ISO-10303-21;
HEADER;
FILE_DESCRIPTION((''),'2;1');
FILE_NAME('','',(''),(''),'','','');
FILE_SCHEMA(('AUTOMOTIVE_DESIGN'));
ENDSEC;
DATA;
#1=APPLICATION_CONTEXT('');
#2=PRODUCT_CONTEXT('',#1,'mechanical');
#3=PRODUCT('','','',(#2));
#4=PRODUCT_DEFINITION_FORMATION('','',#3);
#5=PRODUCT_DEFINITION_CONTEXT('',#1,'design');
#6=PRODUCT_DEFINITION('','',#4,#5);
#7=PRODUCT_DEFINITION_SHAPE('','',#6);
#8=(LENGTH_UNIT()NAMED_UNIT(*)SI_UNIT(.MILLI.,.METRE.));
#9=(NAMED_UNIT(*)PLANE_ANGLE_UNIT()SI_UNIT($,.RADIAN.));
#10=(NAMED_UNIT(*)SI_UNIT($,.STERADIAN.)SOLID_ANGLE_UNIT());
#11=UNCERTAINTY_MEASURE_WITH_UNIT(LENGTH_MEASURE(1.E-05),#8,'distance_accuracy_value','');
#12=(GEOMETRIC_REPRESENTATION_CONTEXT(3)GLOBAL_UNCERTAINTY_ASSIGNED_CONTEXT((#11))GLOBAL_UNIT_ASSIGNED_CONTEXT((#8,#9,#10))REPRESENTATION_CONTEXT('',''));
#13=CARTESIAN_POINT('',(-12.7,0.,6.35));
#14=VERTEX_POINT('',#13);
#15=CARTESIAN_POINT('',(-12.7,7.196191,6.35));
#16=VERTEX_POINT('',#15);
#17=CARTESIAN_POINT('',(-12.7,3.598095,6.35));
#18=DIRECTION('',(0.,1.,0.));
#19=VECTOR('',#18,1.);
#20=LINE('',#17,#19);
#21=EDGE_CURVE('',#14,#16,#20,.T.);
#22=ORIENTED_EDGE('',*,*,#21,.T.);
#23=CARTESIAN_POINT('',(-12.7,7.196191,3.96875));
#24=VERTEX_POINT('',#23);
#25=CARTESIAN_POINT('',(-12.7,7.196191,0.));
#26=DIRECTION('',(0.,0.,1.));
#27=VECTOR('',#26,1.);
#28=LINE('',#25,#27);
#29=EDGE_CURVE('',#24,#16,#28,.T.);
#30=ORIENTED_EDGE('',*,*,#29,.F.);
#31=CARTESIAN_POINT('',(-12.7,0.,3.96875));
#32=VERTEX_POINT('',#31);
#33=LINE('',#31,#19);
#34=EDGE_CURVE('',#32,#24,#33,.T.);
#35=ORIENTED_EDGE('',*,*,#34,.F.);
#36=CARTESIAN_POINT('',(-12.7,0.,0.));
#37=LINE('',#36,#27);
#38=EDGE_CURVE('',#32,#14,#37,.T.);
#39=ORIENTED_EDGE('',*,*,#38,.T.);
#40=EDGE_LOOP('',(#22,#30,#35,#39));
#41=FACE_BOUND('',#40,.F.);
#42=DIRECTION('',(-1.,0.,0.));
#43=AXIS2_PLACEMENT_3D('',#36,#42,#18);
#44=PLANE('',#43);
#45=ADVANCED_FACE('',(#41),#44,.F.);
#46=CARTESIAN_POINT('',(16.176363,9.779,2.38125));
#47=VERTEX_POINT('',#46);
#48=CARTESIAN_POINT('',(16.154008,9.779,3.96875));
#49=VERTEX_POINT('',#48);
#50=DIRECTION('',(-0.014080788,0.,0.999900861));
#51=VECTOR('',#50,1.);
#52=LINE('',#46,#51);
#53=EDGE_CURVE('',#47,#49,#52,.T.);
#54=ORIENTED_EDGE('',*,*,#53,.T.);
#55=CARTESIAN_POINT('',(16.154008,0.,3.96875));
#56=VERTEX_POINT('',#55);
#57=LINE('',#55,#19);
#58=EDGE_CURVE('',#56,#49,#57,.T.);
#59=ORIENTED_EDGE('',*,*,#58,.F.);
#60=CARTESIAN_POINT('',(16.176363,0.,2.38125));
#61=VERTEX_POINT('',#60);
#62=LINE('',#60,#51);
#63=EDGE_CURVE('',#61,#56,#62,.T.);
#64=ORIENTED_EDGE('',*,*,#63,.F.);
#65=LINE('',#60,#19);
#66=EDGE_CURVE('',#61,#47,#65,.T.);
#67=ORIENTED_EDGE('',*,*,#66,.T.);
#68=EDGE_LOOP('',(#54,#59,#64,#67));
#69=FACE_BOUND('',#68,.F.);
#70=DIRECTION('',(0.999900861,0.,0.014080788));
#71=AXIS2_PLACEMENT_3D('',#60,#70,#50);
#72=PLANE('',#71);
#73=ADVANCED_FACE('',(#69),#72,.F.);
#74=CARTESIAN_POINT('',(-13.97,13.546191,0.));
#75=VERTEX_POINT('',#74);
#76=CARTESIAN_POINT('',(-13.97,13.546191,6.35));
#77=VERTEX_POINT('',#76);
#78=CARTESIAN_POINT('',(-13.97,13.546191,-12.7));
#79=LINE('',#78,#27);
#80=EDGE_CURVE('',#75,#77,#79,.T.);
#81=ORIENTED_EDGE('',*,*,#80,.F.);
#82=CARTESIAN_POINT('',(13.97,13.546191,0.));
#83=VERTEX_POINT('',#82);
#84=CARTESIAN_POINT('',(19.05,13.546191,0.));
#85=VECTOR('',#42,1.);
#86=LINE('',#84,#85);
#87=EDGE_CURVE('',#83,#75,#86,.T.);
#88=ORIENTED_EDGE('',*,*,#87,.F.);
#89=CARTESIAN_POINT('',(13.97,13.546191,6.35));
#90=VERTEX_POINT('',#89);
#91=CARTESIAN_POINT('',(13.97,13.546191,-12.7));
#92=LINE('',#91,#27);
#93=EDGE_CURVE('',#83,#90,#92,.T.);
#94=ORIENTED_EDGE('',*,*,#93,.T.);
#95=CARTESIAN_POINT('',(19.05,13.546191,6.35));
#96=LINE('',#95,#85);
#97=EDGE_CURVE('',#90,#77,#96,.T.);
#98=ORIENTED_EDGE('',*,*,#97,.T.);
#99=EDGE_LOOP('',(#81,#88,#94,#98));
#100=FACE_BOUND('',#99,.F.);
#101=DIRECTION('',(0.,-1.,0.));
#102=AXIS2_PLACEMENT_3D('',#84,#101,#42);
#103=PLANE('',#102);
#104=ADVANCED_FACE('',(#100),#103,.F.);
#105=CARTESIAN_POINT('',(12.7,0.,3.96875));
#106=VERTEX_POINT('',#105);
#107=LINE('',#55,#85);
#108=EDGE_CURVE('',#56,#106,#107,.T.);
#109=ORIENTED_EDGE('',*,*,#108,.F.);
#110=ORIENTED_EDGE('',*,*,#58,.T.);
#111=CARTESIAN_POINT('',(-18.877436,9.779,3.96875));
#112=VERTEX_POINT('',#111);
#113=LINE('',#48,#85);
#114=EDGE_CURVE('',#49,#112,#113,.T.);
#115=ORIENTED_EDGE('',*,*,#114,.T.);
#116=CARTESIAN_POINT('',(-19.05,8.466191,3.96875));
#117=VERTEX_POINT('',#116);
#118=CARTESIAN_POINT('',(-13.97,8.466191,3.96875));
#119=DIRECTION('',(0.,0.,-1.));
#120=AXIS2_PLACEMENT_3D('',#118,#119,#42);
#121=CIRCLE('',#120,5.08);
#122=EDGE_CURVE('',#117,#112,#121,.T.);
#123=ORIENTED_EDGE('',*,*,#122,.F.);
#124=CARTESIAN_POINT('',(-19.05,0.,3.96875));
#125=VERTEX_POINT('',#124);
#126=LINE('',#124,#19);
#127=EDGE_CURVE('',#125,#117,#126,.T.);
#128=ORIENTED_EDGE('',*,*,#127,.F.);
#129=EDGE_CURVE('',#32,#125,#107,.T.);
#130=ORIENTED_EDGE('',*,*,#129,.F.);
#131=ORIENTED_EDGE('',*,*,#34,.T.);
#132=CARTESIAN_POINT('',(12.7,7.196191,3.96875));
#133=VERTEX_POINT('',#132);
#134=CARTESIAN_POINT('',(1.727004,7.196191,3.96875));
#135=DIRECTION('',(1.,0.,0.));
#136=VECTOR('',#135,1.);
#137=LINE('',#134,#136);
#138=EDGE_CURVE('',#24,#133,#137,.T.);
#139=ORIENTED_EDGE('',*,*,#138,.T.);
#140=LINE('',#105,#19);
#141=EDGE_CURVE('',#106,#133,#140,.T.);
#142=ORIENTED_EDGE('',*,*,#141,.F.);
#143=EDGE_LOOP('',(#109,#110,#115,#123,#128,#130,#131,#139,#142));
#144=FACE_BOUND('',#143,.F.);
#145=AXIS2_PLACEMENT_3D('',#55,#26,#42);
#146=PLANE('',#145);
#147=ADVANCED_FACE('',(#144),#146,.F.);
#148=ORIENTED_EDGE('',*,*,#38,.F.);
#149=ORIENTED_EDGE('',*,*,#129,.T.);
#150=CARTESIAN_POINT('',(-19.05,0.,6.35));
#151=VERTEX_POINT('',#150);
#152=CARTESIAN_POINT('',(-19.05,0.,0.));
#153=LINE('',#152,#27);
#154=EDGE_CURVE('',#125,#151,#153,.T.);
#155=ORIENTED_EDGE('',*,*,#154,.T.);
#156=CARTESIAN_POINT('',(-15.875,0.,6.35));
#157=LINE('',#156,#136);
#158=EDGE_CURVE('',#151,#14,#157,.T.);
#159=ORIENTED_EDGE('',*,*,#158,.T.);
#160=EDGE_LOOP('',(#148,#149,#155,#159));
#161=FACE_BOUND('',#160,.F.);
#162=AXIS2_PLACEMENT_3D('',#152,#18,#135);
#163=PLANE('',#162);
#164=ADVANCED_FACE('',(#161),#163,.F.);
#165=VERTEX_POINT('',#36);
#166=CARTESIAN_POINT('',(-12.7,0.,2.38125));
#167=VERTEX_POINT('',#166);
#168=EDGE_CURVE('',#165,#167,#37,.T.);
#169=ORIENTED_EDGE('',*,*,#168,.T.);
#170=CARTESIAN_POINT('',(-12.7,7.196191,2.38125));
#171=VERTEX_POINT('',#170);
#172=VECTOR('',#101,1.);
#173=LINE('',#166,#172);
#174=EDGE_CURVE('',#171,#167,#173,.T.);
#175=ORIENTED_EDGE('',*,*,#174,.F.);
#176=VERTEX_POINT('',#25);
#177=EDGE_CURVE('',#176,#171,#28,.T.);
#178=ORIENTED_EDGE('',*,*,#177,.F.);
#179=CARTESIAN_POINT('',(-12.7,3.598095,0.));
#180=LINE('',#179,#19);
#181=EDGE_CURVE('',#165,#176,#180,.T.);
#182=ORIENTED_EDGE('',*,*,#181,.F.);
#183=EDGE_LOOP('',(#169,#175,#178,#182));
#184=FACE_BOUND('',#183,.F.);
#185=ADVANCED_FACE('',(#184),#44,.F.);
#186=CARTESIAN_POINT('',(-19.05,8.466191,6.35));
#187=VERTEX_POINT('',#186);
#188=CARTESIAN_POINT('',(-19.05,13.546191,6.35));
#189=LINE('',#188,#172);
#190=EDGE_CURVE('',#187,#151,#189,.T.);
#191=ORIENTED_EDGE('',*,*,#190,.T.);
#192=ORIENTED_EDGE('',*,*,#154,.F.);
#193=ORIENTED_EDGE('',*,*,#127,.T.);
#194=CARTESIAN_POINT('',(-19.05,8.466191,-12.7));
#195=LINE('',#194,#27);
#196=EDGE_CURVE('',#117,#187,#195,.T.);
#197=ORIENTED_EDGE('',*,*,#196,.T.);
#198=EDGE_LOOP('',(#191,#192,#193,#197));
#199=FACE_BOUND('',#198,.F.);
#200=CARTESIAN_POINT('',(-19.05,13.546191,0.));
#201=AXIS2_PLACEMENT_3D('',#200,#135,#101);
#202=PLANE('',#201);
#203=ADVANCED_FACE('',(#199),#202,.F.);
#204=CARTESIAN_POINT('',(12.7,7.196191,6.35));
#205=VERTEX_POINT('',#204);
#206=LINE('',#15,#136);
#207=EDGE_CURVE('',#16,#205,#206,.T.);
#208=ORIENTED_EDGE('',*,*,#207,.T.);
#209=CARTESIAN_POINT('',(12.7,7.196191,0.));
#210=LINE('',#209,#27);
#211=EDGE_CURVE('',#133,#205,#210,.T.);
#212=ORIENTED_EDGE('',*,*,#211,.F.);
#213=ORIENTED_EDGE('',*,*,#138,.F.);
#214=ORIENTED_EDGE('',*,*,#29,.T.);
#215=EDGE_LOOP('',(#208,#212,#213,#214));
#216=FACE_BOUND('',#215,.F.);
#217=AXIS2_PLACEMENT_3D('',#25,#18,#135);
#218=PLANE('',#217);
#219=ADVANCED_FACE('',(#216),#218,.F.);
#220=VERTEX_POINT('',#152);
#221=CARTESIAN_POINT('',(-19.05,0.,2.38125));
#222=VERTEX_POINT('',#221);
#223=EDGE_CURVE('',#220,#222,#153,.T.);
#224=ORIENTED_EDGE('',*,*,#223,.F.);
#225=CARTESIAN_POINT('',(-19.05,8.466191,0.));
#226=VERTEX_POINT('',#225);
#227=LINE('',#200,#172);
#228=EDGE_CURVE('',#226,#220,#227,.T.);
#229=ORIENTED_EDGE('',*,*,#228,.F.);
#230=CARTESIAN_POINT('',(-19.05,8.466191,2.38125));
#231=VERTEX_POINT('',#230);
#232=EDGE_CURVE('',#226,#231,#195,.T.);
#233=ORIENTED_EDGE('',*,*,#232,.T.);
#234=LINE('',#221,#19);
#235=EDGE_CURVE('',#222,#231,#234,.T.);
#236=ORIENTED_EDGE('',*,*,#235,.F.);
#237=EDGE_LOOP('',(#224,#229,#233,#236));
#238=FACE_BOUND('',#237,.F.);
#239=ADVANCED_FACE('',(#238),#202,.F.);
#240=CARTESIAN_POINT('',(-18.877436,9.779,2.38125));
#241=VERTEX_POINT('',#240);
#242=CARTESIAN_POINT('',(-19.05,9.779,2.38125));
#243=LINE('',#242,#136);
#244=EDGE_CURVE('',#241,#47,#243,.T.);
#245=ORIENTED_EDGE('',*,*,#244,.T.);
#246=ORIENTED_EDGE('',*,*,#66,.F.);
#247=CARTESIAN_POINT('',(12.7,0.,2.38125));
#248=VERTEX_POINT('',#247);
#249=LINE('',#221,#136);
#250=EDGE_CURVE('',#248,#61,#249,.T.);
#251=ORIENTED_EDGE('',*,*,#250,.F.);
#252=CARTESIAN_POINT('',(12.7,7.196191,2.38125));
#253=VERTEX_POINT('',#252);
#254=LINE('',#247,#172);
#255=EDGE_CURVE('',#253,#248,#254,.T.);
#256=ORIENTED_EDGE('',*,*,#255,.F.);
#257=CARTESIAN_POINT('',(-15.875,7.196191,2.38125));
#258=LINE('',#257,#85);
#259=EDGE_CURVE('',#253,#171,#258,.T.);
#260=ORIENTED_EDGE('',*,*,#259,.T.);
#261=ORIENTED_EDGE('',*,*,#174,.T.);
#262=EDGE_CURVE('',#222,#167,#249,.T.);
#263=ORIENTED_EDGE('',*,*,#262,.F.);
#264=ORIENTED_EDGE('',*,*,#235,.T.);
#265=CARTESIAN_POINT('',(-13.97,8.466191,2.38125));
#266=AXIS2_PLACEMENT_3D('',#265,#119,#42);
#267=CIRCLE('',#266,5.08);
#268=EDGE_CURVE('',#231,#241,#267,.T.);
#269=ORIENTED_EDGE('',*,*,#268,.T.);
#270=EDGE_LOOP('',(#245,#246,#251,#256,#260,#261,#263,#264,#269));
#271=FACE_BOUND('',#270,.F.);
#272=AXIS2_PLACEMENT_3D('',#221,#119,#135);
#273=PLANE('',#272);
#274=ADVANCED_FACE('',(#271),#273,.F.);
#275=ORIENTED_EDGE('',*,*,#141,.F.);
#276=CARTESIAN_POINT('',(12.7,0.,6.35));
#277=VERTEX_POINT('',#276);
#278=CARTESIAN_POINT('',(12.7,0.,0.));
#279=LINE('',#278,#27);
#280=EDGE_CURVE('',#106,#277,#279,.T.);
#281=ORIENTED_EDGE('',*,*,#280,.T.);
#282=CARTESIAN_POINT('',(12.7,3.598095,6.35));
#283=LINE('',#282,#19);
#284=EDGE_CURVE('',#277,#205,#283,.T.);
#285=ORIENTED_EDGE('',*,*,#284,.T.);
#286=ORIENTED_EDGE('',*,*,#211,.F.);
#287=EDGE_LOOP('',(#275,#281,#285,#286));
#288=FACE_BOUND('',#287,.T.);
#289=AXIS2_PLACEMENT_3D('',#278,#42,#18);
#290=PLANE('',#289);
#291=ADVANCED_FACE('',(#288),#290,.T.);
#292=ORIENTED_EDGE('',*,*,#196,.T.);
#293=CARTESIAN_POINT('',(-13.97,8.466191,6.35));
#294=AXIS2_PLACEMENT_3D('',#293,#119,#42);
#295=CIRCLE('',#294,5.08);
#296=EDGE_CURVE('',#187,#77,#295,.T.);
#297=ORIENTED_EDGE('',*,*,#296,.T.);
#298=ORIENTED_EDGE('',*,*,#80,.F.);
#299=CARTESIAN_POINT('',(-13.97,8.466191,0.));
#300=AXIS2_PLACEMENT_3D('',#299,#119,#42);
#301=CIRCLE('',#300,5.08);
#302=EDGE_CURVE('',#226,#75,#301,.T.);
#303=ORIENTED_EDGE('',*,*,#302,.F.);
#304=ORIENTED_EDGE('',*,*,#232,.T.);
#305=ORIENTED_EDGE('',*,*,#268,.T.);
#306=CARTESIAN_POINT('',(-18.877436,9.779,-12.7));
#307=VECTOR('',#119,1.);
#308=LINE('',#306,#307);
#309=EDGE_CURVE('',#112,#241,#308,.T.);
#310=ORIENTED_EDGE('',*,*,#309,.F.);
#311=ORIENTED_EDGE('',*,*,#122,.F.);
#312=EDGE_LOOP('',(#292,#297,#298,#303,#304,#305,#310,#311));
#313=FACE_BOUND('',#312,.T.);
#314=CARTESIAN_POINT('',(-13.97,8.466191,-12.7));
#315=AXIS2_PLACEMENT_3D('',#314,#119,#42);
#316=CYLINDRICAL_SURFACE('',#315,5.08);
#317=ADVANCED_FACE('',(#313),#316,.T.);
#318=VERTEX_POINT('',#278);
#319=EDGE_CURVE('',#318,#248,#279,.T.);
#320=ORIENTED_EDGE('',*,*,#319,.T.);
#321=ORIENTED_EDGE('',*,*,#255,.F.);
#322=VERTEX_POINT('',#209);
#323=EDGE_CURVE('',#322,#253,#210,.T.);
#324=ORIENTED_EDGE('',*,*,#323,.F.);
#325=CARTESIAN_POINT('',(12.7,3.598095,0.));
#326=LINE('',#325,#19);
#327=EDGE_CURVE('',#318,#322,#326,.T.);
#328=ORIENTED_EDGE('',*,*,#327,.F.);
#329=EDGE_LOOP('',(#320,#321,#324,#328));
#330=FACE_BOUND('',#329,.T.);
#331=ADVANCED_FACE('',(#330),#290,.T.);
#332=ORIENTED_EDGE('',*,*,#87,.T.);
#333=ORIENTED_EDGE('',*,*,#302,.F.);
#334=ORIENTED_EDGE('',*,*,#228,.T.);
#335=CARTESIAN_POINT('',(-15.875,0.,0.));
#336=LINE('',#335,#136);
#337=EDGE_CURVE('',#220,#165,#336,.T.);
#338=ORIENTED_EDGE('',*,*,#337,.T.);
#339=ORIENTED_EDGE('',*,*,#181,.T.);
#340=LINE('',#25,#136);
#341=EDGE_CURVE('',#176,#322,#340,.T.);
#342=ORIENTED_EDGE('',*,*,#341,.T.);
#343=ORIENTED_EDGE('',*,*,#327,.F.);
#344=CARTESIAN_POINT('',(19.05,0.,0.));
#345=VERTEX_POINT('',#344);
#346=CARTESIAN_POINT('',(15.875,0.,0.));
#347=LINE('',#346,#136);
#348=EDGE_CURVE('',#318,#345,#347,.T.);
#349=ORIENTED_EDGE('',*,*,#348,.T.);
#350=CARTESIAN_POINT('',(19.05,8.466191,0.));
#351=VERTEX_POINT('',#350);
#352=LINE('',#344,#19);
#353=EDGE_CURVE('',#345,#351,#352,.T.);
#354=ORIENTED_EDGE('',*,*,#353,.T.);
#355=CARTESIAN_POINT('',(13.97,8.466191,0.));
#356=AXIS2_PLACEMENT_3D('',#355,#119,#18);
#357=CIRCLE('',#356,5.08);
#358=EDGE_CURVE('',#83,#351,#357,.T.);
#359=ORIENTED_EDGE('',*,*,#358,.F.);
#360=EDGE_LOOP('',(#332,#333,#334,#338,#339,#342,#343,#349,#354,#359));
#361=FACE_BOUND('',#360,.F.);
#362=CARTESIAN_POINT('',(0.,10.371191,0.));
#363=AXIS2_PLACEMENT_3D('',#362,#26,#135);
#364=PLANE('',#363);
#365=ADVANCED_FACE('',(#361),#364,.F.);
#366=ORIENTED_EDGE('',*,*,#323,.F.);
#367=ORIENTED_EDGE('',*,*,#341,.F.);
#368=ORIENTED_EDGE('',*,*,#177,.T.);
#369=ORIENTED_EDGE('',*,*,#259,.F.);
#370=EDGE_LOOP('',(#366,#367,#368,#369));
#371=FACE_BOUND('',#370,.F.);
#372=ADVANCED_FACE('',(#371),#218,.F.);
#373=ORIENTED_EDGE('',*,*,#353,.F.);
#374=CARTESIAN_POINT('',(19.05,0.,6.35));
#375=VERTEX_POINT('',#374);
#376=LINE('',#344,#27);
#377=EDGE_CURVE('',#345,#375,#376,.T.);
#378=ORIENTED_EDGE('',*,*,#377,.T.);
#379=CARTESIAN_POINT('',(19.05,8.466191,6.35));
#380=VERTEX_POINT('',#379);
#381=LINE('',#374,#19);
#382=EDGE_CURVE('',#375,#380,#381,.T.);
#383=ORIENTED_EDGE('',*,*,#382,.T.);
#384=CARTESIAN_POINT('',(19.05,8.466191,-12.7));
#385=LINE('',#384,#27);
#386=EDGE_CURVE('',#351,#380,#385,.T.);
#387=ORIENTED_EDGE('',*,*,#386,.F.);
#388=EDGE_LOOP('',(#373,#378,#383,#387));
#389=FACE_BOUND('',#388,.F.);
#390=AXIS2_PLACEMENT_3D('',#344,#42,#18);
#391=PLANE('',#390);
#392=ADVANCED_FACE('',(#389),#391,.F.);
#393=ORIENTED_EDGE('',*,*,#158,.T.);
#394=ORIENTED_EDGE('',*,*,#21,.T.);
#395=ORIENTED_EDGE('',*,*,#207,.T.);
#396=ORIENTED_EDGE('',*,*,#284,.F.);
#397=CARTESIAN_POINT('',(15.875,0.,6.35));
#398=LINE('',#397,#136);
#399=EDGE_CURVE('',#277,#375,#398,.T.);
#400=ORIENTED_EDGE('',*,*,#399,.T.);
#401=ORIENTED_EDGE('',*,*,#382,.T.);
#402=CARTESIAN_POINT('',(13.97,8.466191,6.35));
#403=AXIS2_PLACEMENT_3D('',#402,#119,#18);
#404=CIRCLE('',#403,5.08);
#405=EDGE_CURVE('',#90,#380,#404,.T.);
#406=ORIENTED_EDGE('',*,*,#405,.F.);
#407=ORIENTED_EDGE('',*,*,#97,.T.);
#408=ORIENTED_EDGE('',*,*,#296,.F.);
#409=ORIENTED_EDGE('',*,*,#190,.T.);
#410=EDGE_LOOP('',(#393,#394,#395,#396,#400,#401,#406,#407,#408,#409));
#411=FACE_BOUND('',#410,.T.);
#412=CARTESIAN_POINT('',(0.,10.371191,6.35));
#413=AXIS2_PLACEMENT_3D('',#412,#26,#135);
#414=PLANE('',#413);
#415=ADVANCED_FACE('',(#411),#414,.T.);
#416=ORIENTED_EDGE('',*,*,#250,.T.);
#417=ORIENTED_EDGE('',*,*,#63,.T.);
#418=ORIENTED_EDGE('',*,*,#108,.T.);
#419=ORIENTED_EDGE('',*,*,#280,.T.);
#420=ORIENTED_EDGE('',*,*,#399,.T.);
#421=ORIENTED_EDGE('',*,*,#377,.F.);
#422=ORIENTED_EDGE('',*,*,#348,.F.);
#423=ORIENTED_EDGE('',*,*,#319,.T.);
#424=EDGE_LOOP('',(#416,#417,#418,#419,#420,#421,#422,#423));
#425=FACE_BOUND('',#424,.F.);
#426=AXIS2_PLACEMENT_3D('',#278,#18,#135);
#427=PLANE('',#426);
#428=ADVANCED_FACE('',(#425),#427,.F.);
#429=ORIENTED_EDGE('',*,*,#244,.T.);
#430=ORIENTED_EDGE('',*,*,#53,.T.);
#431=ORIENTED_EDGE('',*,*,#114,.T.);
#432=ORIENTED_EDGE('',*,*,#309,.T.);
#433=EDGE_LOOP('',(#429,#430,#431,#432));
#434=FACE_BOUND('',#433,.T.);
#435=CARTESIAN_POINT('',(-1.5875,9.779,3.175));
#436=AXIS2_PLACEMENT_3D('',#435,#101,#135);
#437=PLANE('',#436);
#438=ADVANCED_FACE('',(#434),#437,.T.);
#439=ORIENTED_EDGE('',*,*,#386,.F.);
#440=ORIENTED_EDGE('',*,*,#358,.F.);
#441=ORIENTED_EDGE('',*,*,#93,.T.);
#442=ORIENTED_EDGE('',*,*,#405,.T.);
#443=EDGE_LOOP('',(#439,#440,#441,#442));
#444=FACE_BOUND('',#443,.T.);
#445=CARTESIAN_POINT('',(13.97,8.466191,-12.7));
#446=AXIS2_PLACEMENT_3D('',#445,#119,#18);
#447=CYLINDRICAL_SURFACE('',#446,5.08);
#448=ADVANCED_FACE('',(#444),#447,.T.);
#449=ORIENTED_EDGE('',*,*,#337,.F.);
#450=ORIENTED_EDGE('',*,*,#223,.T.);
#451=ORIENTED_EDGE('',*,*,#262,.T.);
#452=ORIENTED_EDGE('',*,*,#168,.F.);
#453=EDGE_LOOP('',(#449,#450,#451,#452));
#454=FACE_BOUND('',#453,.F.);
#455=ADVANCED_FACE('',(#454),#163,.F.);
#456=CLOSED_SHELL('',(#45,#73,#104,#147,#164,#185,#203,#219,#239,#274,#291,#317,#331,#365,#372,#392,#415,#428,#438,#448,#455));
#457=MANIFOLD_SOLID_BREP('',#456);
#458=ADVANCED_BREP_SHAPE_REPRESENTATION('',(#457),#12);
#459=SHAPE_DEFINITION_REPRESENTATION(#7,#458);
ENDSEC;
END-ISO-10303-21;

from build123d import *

# Parameters (mm, degrees)
F0_W        = 6.35
F0_H        = 6.35
F0_H_2      = 7.196190767
F1_DEPTH    = 6.35
F2_W        = 6.35
F2_H        = 1.5875
F3_DEPTH    = 9.779
F4_T1_DEPTH = 31.75


# Not quite as in the source:
# - a fillet or chamfer that OpenCascade refuses, or shapes differently, is made with other operations: its cross-section is extruded or revolved along the edge and cut away or added


with BuildPart() as f1:
    # F0 (on Top) → F1 (new body)
    with BuildSketch(Plane.XY):
        Polygon((-12.7, 13.546190767), (-12.7, 7.196190767), (0, 7.196190767), (12.7, 7.196190767), (12.7, 13.546190767), align=None)
        with Locations((-15.875, 10.371190767)):
            Rectangle(F0_W, F0_H)
        with Locations((-15.875, 3.5980953835)):
            Rectangle(F0_W, F0_H_2)
        with Locations((15.875, 10.371190767)):
            Rectangle(F0_W, F0_H)
        with Locations((15.875, 3.5980953835)):
            Rectangle(F0_W, F0_H_2)
    extrude(amount=F1_DEPTH)

    # F2 (on face) → F3 (cut)
    with BuildSketch(Plane.XZ):
        Polygon((9.525, 3.96875), (-8.7374933064, 3.96875), (-12.7, 3.96875), (-12.7, 2.38125), (-8.7374933064, 2.38125), (9.525, 2.38125), align=None)
        Polygon((16.1540079862, 3.96875), (9.525, 3.96875), (9.525, 2.38125), (16.1763634533, 2.38125), align=None)
        with Locations((-15.875, 3.175)):
            Rectangle(F2_W, F2_H)
    extrude(amount=-F3_DEPTH, mode=Mode.SUBTRACT)

    # F4: fillet of radius 5.08 on 2 edges, made by hand

    # F4_s2 → F4_t1 (cut)
    with BuildSketch(Plane.XY.offset(-12.7)):
        with BuildLine():
            ThreePointArc((13.97, 13.546190767), (17.5621024484, 12.0582932154), (19.05, 8.466190767))
            Line((19.05, 8.466190767), (19.05, 13.546190767))
            Line((19.05, 13.546190767), (13.97, 13.546190767))
        make_face()
        with BuildLine():
            ThreePointArc((-19.05, 8.466190767), (-17.5621024484, 12.0582932154), (-13.97, 13.546190767))
            Line((-13.97, 13.546190767), (-19.05, 13.546190767))
            Line((-19.05, 13.546190767), (-19.05, 8.466190767))
        make_face()
    extrude(amount=F4_T1_DEPTH, mode=Mode.SUBTRACT)


solid = f1.part
